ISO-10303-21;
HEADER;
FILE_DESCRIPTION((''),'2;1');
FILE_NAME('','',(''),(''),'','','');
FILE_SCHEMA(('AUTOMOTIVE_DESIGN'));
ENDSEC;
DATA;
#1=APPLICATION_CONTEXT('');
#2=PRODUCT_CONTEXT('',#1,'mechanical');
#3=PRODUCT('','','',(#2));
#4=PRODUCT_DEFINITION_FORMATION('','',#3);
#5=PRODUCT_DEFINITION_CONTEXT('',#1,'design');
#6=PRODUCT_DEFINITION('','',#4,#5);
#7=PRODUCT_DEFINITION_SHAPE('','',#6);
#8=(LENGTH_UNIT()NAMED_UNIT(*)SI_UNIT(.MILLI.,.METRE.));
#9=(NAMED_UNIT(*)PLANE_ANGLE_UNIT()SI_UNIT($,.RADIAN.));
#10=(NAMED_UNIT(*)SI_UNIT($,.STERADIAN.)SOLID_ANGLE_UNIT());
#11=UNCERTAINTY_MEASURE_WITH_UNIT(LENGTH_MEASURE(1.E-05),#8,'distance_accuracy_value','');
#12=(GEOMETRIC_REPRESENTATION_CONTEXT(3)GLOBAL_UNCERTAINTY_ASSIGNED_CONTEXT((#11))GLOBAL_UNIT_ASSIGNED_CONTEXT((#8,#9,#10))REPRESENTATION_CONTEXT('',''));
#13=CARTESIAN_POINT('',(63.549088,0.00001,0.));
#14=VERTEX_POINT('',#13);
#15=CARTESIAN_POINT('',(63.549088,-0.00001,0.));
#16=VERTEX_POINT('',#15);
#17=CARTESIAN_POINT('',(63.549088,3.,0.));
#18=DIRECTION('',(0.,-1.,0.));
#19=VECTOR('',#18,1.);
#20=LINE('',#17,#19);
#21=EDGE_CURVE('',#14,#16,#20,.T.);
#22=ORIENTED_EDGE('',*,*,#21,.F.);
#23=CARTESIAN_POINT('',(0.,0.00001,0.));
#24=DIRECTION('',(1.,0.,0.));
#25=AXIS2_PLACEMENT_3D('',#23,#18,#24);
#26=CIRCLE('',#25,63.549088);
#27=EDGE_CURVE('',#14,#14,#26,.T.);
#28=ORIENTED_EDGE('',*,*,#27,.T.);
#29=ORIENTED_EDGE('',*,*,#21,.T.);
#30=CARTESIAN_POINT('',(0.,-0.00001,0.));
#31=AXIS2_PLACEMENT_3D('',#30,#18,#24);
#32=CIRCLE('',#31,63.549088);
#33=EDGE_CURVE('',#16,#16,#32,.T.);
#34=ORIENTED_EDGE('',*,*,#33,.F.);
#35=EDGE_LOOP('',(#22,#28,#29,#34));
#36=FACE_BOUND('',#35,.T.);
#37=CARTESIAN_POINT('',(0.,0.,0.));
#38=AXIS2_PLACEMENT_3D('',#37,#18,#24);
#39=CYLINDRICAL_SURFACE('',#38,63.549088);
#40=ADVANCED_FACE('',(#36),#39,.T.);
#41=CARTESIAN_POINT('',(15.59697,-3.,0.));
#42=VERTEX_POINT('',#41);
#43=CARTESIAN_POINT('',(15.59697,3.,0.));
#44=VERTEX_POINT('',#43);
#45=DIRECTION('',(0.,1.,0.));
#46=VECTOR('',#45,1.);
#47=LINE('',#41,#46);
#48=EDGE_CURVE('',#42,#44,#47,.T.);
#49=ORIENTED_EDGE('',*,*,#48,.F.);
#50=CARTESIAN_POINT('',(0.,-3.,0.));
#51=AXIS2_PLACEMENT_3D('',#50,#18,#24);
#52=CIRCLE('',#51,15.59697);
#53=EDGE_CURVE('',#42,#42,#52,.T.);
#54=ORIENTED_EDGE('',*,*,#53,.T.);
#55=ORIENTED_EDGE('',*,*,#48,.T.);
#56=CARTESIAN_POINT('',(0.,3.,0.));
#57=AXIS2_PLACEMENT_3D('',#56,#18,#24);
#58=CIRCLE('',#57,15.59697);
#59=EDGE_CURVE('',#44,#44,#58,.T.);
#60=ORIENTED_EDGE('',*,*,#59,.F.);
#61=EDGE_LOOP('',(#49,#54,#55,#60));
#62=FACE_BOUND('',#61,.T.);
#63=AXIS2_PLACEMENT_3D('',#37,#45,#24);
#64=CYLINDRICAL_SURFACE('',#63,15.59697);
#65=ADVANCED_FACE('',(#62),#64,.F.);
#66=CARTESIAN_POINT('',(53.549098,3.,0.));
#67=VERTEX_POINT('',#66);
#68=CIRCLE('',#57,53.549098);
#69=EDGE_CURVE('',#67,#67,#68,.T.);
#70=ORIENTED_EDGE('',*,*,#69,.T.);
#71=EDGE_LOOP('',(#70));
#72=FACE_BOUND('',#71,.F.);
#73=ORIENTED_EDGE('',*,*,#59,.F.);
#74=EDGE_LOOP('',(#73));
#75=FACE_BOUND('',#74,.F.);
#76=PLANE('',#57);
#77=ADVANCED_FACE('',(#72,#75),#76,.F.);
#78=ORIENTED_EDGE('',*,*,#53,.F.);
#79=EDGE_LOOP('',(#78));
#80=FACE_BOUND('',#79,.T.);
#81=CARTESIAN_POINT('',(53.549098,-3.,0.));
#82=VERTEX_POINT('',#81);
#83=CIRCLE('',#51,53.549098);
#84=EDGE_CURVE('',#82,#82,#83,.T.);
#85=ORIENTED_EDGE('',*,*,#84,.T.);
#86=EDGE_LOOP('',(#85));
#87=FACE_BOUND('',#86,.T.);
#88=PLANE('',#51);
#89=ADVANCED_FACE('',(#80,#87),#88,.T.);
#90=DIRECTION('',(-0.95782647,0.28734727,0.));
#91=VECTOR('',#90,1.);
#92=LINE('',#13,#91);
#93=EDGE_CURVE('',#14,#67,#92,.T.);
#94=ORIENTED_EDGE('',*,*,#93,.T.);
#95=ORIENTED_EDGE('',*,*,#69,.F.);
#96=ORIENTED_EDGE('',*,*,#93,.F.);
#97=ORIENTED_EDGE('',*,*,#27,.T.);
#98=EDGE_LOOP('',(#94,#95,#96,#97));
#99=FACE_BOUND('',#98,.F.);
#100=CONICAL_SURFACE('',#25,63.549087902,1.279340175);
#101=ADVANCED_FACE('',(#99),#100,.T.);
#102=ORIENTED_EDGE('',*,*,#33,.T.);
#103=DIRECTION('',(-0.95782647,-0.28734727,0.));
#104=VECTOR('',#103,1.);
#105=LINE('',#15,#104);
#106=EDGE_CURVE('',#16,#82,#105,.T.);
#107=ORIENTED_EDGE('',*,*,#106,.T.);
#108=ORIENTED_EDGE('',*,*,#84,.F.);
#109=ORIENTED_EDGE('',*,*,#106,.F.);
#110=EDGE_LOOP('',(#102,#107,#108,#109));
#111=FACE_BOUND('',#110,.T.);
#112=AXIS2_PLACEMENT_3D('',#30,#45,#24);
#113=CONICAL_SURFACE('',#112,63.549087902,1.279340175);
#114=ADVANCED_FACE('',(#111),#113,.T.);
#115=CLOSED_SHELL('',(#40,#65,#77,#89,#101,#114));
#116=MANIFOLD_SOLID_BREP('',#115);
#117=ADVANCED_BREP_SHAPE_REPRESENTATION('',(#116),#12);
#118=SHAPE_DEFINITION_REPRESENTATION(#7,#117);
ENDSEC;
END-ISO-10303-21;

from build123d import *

# Parameters (mm, degrees)
F0_R     = 63.5490879023
F0_R_2   = 15.5969700922
F1_DEPTH = 3
F2_SIZE2 = 9.99999
F2_SIZE  = 2.99999


# Not quite as in the source:
# - a fillet or chamfer is up to 0.001 mm smaller than in the source, because OpenCascade refuses the exact size


with BuildPart() as f1:
    # F0 (on Front) → F1 (new body, symmetric)
    with BuildSketch(Plane.XZ):
        Circle(F0_R)
        Circle(F0_R_2, mode=Mode.SUBTRACT)
    extrude(amount=F1_DEPTH, both=True)

    # F2 (size 3 and 10 in the source; OpenCascade refuses exactly that, so slightly less here)
    f2_edges = [f1.edges().sort_by_distance(p)[0] for p in [
        (-63.549088, -3, 0),
        (-63.549088, 3, 0),
    ]]
    f2_side = f1.faces().sort_by_distance((-63.549088, 0, 0))[0]
    chamfer(f2_edges, length=F2_SIZE, length2=F2_SIZE2, reference=f2_side)


solid = f1.part
